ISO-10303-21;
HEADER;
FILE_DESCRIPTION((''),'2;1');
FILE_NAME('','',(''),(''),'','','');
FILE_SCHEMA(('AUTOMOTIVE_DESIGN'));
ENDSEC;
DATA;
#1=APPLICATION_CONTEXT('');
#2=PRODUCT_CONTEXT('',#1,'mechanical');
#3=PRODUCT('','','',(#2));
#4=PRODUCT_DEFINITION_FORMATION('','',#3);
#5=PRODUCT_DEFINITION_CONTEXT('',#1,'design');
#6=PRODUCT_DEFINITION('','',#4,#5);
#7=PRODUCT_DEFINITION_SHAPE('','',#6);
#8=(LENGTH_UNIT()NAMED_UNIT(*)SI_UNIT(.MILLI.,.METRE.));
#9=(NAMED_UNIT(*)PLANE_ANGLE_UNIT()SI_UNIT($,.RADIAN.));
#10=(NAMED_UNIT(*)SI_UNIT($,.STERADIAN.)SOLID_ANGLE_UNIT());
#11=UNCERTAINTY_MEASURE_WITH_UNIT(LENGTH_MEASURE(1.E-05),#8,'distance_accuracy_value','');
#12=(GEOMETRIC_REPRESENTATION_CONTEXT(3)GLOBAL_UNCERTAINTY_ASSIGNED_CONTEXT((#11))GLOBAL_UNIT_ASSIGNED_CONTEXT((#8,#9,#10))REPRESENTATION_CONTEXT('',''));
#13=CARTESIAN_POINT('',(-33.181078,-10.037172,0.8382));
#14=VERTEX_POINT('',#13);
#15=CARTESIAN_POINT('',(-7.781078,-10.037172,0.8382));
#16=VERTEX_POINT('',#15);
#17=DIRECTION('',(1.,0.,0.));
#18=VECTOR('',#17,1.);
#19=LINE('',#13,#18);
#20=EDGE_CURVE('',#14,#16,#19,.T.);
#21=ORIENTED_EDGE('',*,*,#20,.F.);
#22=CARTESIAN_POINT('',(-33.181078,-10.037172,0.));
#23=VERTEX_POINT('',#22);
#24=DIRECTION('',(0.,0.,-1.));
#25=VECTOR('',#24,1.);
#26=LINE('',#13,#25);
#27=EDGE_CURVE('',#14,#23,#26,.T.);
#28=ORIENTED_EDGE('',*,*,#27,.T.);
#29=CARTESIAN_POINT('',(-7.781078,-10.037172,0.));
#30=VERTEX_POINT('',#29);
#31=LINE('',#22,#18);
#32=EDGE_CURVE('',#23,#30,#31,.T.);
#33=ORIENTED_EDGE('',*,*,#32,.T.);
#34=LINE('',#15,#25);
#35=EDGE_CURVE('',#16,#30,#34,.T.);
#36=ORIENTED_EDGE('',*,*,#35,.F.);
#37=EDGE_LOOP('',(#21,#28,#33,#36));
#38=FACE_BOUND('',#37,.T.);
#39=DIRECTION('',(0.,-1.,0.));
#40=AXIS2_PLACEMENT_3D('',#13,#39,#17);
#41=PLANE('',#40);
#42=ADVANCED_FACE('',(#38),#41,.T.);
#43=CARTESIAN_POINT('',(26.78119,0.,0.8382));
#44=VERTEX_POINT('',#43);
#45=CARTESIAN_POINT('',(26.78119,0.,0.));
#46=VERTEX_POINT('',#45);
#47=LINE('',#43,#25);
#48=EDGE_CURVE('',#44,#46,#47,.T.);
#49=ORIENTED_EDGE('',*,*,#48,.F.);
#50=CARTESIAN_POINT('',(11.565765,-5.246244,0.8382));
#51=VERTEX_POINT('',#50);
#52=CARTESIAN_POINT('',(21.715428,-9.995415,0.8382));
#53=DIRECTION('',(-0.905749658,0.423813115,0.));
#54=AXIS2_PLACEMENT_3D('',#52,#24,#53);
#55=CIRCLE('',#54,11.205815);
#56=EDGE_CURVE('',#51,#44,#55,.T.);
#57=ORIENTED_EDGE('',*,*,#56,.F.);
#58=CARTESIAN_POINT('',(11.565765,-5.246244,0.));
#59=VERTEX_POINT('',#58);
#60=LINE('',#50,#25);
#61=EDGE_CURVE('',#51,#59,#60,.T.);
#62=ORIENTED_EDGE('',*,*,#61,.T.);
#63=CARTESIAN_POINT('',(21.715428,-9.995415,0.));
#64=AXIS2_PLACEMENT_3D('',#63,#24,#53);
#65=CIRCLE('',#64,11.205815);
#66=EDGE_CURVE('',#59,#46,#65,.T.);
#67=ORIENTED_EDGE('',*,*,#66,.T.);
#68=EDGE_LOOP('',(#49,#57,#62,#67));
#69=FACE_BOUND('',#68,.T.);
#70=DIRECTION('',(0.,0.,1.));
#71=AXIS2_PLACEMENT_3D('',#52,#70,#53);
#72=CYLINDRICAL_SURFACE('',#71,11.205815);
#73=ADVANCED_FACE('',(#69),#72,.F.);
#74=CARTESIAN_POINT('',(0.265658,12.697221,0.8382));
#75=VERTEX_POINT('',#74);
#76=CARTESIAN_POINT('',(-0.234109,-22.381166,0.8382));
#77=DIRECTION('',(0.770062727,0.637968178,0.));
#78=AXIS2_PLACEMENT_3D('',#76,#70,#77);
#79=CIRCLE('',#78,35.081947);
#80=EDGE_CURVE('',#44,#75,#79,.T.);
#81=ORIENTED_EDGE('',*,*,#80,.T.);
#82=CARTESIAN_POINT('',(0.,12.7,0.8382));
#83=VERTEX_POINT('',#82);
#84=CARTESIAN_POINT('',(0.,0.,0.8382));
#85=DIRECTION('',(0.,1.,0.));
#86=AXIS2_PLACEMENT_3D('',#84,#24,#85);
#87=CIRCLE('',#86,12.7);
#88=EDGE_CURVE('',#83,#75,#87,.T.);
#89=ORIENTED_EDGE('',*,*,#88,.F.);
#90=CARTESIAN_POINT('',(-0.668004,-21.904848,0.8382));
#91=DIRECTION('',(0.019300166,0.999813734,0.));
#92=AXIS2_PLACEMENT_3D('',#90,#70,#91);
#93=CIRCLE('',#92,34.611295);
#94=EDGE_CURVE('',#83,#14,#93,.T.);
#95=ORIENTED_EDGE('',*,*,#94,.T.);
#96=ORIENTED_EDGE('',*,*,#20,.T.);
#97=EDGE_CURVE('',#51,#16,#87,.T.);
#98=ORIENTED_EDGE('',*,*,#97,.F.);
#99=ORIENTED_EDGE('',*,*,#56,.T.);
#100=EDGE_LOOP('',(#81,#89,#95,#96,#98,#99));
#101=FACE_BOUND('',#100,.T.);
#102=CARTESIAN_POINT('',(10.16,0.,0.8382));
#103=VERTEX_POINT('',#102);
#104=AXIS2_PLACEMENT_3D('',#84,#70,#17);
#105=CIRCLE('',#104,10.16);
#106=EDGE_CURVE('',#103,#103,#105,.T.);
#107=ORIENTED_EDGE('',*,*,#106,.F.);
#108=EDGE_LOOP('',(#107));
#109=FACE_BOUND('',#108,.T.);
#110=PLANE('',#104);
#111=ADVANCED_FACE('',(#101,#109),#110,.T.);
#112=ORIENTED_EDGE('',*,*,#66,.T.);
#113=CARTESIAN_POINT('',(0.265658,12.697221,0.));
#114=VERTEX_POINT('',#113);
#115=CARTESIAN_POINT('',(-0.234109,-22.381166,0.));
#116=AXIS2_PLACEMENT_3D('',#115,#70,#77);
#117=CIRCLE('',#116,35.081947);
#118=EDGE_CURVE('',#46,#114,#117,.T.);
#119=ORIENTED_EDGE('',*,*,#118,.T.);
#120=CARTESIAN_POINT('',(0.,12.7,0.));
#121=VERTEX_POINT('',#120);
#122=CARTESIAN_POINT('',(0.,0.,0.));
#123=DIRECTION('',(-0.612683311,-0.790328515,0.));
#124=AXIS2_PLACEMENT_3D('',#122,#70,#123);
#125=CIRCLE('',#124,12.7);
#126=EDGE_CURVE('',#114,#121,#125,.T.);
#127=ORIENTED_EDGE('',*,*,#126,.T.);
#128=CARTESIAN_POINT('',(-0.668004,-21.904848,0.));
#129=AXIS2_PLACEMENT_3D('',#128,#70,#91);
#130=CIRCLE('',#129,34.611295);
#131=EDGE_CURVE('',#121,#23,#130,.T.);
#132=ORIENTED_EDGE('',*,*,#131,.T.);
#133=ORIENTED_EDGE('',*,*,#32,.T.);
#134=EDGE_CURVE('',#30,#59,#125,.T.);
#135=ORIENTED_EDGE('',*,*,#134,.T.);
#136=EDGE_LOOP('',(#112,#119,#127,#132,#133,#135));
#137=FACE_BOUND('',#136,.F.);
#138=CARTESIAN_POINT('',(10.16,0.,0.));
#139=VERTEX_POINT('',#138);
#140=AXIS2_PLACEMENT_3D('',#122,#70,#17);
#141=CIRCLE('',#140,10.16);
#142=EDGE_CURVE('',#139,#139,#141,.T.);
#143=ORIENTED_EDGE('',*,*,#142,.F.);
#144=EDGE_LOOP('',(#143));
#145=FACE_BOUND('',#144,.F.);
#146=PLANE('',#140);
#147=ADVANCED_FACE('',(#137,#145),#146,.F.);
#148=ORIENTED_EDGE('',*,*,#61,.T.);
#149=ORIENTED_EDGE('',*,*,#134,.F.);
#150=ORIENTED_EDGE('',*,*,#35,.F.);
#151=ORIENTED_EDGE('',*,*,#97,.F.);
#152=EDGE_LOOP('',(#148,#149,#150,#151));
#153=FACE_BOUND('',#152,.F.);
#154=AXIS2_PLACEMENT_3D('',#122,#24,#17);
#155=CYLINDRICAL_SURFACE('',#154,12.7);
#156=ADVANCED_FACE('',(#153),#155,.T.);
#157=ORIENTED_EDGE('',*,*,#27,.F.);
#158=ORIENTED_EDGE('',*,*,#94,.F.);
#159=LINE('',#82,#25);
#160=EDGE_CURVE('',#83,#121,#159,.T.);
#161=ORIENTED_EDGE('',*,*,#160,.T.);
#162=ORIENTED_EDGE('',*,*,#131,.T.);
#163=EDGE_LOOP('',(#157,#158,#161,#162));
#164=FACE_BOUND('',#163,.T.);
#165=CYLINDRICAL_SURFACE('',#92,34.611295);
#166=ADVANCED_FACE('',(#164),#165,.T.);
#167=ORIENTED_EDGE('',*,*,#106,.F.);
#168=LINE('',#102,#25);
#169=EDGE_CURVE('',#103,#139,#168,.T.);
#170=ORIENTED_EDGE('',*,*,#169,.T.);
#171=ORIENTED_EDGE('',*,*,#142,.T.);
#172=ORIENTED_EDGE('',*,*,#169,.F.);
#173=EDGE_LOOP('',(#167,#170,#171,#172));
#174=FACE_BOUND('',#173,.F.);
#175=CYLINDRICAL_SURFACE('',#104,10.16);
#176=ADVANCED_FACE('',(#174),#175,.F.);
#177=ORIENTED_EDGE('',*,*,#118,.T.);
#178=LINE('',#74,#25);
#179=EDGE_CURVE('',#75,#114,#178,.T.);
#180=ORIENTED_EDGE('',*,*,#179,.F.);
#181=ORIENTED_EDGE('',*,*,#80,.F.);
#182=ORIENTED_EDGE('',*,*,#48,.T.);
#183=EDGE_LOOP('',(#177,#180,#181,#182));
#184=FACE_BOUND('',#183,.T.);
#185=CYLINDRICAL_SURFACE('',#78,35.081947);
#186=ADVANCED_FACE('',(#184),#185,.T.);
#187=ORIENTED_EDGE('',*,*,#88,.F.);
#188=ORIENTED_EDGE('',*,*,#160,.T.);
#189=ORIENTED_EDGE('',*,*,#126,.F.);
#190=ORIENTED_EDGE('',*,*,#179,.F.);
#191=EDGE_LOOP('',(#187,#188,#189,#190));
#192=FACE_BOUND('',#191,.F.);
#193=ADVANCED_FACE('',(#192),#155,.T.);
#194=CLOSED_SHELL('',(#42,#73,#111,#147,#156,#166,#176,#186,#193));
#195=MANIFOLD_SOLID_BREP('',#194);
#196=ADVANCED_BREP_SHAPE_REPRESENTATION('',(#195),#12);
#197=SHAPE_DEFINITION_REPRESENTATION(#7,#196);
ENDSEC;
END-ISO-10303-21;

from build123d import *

# Parameters (mm, degrees)
F0_R     = 12.7
F1_DEPTH = 0.8382
F3_R     = 10.1600000635
F4_DEPTH = 18.288
F5_DEPTH = 0.8382
F7_DEPTH = 0.8382


# Not quite as in the source:
# - a feature of the source that left no trace in its solid (it failed there, or was rolled back) is left out


with BuildPart() as f1:
    # F0 (on Top) → F1 (new body)
    with BuildSketch(Plane.XY):
        Circle(F0_R)
    extrude(amount=F1_DEPTH)

    # F3 (on face) → F4 (cut)
    with BuildSketch(Plane.XY.offset(0.8382)):
        Circle(F3_R)
    extrude(amount=-F4_DEPTH, mode=Mode.SUBTRACT)

    # F2 (on face) → F5 (join)
    with BuildSketch(Plane.XY.offset(0.8382)):
        with BuildLine():
            Line((-33.1810780452, -10.0371721343), (-7.7810780452, -10.0371721343))
            ThreePointArc((-7.7810780452, -10.0371721343), (-12.0158663047, 4.1120502121), (0, 12.7))
            ThreePointArc((0, 12.7), (-20.2325604445, 6.6463315632), (-33.1810780452, -10.0371721343))
        make_face()
    extrude(amount=-F5_DEPTH)

    # F6 (on face) → F7 (join)
    with BuildSketch(Plane.XY.offset(0.8382)):
        with BuildLine():
            ThreePointArc((11.5657650484, -5.2462442609), (18.062719128, 0.5983562843), (26.7811901867, 0))
            ThreePointArc((26.7811901867, 0), (14.9176093432, 9.260079703), (0.265657769, 12.6972211901))
            ThreePointArc((0.265657769, 12.6972211901), (10.7465170902, 6.7677448556), (11.5657650484, -5.2462442609))
        make_face()
    extrude(amount=-F7_DEPTH)


solid = f1.part
